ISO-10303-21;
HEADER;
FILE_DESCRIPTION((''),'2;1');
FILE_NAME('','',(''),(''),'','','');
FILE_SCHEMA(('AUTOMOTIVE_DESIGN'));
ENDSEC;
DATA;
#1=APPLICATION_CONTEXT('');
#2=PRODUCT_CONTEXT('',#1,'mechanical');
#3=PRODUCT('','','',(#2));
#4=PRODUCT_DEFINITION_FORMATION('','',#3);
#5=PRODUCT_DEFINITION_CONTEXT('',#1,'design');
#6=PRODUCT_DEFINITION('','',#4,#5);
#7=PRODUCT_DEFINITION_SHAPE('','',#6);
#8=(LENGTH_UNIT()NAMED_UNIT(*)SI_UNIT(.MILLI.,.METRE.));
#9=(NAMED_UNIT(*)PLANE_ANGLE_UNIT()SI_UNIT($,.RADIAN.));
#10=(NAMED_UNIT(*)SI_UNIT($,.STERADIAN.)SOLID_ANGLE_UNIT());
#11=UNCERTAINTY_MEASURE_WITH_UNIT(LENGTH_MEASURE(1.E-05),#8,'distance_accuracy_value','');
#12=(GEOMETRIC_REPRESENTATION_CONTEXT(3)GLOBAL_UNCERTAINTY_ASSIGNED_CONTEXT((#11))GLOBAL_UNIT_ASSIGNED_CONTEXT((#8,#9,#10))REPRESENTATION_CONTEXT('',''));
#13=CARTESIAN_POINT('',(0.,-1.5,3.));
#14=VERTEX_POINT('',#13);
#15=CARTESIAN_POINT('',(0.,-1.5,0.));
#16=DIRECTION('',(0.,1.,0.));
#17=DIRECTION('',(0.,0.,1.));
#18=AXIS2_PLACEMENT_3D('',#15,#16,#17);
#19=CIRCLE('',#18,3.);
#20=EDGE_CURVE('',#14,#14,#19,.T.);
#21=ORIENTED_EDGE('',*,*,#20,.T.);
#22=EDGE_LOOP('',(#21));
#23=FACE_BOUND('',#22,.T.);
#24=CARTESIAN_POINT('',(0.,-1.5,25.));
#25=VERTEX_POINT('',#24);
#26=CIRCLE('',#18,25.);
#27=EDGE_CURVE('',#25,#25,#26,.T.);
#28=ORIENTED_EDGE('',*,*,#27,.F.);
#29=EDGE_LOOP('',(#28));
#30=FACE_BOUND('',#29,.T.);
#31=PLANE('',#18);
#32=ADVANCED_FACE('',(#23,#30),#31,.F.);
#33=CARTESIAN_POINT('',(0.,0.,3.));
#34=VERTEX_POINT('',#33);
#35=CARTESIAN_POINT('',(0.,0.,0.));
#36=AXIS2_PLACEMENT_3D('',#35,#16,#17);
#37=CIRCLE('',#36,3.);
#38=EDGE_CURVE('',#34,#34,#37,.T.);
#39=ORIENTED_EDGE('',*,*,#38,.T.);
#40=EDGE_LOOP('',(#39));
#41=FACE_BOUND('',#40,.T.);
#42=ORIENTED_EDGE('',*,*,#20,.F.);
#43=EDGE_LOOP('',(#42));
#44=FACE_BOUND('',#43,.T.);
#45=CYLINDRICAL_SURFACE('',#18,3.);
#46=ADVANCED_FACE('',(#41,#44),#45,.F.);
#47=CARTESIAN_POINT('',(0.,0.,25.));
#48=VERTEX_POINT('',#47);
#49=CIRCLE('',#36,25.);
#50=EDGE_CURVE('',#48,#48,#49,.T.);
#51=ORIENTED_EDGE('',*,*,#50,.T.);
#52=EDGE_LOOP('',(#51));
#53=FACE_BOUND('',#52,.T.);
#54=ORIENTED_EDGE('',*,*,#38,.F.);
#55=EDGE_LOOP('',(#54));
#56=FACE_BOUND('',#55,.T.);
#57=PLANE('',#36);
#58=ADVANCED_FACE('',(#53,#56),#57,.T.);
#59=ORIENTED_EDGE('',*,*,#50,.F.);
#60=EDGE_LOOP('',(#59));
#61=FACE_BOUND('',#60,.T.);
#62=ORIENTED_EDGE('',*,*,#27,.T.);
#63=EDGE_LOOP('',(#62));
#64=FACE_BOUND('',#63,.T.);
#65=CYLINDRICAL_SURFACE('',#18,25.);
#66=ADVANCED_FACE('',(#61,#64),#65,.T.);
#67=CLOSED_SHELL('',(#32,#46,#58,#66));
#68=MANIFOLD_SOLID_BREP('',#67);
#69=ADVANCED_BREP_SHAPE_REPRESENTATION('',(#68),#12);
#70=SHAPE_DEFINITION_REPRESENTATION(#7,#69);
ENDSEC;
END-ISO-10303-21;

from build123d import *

# Parameters (mm, degrees)
SKETCH1_R          = 25
BASE_FLANGE1_DEPTH = 1.5
HOLE1_START        = -1.5
HOLE1_OUTLINE_R    = 3
HOLE1_DEPTH        = 1.5


# Read off the part's stored shape, not the designer's step: Hole1
# Sheet-metal steps are written as plain solids
with BuildPart() as part:
    # Sketch1 → Base-Flange1 (new body)
    with BuildSketch(Plane(origin=(0, 0, 0), x_dir=(1, 0, 0), z_dir=(0, 1, 0))):
        with Locations(Location((0, 0, 0), (0, 0, 270))):
            Circle(SKETCH1_R)
    extrude(amount=-BASE_FLANGE1_DEPTH)

    # Hole1 outline → Hole1 (cut)
    with BuildSketch(Plane(origin=(0, 0, 0), x_dir=(1, 0, 0), z_dir=(0, 1, 0)).offset(HOLE1_START)):
        Circle(HOLE1_OUTLINE_R)
    extrude(amount=HOLE1_DEPTH, mode=Mode.SUBTRACT)


solid = part.part
